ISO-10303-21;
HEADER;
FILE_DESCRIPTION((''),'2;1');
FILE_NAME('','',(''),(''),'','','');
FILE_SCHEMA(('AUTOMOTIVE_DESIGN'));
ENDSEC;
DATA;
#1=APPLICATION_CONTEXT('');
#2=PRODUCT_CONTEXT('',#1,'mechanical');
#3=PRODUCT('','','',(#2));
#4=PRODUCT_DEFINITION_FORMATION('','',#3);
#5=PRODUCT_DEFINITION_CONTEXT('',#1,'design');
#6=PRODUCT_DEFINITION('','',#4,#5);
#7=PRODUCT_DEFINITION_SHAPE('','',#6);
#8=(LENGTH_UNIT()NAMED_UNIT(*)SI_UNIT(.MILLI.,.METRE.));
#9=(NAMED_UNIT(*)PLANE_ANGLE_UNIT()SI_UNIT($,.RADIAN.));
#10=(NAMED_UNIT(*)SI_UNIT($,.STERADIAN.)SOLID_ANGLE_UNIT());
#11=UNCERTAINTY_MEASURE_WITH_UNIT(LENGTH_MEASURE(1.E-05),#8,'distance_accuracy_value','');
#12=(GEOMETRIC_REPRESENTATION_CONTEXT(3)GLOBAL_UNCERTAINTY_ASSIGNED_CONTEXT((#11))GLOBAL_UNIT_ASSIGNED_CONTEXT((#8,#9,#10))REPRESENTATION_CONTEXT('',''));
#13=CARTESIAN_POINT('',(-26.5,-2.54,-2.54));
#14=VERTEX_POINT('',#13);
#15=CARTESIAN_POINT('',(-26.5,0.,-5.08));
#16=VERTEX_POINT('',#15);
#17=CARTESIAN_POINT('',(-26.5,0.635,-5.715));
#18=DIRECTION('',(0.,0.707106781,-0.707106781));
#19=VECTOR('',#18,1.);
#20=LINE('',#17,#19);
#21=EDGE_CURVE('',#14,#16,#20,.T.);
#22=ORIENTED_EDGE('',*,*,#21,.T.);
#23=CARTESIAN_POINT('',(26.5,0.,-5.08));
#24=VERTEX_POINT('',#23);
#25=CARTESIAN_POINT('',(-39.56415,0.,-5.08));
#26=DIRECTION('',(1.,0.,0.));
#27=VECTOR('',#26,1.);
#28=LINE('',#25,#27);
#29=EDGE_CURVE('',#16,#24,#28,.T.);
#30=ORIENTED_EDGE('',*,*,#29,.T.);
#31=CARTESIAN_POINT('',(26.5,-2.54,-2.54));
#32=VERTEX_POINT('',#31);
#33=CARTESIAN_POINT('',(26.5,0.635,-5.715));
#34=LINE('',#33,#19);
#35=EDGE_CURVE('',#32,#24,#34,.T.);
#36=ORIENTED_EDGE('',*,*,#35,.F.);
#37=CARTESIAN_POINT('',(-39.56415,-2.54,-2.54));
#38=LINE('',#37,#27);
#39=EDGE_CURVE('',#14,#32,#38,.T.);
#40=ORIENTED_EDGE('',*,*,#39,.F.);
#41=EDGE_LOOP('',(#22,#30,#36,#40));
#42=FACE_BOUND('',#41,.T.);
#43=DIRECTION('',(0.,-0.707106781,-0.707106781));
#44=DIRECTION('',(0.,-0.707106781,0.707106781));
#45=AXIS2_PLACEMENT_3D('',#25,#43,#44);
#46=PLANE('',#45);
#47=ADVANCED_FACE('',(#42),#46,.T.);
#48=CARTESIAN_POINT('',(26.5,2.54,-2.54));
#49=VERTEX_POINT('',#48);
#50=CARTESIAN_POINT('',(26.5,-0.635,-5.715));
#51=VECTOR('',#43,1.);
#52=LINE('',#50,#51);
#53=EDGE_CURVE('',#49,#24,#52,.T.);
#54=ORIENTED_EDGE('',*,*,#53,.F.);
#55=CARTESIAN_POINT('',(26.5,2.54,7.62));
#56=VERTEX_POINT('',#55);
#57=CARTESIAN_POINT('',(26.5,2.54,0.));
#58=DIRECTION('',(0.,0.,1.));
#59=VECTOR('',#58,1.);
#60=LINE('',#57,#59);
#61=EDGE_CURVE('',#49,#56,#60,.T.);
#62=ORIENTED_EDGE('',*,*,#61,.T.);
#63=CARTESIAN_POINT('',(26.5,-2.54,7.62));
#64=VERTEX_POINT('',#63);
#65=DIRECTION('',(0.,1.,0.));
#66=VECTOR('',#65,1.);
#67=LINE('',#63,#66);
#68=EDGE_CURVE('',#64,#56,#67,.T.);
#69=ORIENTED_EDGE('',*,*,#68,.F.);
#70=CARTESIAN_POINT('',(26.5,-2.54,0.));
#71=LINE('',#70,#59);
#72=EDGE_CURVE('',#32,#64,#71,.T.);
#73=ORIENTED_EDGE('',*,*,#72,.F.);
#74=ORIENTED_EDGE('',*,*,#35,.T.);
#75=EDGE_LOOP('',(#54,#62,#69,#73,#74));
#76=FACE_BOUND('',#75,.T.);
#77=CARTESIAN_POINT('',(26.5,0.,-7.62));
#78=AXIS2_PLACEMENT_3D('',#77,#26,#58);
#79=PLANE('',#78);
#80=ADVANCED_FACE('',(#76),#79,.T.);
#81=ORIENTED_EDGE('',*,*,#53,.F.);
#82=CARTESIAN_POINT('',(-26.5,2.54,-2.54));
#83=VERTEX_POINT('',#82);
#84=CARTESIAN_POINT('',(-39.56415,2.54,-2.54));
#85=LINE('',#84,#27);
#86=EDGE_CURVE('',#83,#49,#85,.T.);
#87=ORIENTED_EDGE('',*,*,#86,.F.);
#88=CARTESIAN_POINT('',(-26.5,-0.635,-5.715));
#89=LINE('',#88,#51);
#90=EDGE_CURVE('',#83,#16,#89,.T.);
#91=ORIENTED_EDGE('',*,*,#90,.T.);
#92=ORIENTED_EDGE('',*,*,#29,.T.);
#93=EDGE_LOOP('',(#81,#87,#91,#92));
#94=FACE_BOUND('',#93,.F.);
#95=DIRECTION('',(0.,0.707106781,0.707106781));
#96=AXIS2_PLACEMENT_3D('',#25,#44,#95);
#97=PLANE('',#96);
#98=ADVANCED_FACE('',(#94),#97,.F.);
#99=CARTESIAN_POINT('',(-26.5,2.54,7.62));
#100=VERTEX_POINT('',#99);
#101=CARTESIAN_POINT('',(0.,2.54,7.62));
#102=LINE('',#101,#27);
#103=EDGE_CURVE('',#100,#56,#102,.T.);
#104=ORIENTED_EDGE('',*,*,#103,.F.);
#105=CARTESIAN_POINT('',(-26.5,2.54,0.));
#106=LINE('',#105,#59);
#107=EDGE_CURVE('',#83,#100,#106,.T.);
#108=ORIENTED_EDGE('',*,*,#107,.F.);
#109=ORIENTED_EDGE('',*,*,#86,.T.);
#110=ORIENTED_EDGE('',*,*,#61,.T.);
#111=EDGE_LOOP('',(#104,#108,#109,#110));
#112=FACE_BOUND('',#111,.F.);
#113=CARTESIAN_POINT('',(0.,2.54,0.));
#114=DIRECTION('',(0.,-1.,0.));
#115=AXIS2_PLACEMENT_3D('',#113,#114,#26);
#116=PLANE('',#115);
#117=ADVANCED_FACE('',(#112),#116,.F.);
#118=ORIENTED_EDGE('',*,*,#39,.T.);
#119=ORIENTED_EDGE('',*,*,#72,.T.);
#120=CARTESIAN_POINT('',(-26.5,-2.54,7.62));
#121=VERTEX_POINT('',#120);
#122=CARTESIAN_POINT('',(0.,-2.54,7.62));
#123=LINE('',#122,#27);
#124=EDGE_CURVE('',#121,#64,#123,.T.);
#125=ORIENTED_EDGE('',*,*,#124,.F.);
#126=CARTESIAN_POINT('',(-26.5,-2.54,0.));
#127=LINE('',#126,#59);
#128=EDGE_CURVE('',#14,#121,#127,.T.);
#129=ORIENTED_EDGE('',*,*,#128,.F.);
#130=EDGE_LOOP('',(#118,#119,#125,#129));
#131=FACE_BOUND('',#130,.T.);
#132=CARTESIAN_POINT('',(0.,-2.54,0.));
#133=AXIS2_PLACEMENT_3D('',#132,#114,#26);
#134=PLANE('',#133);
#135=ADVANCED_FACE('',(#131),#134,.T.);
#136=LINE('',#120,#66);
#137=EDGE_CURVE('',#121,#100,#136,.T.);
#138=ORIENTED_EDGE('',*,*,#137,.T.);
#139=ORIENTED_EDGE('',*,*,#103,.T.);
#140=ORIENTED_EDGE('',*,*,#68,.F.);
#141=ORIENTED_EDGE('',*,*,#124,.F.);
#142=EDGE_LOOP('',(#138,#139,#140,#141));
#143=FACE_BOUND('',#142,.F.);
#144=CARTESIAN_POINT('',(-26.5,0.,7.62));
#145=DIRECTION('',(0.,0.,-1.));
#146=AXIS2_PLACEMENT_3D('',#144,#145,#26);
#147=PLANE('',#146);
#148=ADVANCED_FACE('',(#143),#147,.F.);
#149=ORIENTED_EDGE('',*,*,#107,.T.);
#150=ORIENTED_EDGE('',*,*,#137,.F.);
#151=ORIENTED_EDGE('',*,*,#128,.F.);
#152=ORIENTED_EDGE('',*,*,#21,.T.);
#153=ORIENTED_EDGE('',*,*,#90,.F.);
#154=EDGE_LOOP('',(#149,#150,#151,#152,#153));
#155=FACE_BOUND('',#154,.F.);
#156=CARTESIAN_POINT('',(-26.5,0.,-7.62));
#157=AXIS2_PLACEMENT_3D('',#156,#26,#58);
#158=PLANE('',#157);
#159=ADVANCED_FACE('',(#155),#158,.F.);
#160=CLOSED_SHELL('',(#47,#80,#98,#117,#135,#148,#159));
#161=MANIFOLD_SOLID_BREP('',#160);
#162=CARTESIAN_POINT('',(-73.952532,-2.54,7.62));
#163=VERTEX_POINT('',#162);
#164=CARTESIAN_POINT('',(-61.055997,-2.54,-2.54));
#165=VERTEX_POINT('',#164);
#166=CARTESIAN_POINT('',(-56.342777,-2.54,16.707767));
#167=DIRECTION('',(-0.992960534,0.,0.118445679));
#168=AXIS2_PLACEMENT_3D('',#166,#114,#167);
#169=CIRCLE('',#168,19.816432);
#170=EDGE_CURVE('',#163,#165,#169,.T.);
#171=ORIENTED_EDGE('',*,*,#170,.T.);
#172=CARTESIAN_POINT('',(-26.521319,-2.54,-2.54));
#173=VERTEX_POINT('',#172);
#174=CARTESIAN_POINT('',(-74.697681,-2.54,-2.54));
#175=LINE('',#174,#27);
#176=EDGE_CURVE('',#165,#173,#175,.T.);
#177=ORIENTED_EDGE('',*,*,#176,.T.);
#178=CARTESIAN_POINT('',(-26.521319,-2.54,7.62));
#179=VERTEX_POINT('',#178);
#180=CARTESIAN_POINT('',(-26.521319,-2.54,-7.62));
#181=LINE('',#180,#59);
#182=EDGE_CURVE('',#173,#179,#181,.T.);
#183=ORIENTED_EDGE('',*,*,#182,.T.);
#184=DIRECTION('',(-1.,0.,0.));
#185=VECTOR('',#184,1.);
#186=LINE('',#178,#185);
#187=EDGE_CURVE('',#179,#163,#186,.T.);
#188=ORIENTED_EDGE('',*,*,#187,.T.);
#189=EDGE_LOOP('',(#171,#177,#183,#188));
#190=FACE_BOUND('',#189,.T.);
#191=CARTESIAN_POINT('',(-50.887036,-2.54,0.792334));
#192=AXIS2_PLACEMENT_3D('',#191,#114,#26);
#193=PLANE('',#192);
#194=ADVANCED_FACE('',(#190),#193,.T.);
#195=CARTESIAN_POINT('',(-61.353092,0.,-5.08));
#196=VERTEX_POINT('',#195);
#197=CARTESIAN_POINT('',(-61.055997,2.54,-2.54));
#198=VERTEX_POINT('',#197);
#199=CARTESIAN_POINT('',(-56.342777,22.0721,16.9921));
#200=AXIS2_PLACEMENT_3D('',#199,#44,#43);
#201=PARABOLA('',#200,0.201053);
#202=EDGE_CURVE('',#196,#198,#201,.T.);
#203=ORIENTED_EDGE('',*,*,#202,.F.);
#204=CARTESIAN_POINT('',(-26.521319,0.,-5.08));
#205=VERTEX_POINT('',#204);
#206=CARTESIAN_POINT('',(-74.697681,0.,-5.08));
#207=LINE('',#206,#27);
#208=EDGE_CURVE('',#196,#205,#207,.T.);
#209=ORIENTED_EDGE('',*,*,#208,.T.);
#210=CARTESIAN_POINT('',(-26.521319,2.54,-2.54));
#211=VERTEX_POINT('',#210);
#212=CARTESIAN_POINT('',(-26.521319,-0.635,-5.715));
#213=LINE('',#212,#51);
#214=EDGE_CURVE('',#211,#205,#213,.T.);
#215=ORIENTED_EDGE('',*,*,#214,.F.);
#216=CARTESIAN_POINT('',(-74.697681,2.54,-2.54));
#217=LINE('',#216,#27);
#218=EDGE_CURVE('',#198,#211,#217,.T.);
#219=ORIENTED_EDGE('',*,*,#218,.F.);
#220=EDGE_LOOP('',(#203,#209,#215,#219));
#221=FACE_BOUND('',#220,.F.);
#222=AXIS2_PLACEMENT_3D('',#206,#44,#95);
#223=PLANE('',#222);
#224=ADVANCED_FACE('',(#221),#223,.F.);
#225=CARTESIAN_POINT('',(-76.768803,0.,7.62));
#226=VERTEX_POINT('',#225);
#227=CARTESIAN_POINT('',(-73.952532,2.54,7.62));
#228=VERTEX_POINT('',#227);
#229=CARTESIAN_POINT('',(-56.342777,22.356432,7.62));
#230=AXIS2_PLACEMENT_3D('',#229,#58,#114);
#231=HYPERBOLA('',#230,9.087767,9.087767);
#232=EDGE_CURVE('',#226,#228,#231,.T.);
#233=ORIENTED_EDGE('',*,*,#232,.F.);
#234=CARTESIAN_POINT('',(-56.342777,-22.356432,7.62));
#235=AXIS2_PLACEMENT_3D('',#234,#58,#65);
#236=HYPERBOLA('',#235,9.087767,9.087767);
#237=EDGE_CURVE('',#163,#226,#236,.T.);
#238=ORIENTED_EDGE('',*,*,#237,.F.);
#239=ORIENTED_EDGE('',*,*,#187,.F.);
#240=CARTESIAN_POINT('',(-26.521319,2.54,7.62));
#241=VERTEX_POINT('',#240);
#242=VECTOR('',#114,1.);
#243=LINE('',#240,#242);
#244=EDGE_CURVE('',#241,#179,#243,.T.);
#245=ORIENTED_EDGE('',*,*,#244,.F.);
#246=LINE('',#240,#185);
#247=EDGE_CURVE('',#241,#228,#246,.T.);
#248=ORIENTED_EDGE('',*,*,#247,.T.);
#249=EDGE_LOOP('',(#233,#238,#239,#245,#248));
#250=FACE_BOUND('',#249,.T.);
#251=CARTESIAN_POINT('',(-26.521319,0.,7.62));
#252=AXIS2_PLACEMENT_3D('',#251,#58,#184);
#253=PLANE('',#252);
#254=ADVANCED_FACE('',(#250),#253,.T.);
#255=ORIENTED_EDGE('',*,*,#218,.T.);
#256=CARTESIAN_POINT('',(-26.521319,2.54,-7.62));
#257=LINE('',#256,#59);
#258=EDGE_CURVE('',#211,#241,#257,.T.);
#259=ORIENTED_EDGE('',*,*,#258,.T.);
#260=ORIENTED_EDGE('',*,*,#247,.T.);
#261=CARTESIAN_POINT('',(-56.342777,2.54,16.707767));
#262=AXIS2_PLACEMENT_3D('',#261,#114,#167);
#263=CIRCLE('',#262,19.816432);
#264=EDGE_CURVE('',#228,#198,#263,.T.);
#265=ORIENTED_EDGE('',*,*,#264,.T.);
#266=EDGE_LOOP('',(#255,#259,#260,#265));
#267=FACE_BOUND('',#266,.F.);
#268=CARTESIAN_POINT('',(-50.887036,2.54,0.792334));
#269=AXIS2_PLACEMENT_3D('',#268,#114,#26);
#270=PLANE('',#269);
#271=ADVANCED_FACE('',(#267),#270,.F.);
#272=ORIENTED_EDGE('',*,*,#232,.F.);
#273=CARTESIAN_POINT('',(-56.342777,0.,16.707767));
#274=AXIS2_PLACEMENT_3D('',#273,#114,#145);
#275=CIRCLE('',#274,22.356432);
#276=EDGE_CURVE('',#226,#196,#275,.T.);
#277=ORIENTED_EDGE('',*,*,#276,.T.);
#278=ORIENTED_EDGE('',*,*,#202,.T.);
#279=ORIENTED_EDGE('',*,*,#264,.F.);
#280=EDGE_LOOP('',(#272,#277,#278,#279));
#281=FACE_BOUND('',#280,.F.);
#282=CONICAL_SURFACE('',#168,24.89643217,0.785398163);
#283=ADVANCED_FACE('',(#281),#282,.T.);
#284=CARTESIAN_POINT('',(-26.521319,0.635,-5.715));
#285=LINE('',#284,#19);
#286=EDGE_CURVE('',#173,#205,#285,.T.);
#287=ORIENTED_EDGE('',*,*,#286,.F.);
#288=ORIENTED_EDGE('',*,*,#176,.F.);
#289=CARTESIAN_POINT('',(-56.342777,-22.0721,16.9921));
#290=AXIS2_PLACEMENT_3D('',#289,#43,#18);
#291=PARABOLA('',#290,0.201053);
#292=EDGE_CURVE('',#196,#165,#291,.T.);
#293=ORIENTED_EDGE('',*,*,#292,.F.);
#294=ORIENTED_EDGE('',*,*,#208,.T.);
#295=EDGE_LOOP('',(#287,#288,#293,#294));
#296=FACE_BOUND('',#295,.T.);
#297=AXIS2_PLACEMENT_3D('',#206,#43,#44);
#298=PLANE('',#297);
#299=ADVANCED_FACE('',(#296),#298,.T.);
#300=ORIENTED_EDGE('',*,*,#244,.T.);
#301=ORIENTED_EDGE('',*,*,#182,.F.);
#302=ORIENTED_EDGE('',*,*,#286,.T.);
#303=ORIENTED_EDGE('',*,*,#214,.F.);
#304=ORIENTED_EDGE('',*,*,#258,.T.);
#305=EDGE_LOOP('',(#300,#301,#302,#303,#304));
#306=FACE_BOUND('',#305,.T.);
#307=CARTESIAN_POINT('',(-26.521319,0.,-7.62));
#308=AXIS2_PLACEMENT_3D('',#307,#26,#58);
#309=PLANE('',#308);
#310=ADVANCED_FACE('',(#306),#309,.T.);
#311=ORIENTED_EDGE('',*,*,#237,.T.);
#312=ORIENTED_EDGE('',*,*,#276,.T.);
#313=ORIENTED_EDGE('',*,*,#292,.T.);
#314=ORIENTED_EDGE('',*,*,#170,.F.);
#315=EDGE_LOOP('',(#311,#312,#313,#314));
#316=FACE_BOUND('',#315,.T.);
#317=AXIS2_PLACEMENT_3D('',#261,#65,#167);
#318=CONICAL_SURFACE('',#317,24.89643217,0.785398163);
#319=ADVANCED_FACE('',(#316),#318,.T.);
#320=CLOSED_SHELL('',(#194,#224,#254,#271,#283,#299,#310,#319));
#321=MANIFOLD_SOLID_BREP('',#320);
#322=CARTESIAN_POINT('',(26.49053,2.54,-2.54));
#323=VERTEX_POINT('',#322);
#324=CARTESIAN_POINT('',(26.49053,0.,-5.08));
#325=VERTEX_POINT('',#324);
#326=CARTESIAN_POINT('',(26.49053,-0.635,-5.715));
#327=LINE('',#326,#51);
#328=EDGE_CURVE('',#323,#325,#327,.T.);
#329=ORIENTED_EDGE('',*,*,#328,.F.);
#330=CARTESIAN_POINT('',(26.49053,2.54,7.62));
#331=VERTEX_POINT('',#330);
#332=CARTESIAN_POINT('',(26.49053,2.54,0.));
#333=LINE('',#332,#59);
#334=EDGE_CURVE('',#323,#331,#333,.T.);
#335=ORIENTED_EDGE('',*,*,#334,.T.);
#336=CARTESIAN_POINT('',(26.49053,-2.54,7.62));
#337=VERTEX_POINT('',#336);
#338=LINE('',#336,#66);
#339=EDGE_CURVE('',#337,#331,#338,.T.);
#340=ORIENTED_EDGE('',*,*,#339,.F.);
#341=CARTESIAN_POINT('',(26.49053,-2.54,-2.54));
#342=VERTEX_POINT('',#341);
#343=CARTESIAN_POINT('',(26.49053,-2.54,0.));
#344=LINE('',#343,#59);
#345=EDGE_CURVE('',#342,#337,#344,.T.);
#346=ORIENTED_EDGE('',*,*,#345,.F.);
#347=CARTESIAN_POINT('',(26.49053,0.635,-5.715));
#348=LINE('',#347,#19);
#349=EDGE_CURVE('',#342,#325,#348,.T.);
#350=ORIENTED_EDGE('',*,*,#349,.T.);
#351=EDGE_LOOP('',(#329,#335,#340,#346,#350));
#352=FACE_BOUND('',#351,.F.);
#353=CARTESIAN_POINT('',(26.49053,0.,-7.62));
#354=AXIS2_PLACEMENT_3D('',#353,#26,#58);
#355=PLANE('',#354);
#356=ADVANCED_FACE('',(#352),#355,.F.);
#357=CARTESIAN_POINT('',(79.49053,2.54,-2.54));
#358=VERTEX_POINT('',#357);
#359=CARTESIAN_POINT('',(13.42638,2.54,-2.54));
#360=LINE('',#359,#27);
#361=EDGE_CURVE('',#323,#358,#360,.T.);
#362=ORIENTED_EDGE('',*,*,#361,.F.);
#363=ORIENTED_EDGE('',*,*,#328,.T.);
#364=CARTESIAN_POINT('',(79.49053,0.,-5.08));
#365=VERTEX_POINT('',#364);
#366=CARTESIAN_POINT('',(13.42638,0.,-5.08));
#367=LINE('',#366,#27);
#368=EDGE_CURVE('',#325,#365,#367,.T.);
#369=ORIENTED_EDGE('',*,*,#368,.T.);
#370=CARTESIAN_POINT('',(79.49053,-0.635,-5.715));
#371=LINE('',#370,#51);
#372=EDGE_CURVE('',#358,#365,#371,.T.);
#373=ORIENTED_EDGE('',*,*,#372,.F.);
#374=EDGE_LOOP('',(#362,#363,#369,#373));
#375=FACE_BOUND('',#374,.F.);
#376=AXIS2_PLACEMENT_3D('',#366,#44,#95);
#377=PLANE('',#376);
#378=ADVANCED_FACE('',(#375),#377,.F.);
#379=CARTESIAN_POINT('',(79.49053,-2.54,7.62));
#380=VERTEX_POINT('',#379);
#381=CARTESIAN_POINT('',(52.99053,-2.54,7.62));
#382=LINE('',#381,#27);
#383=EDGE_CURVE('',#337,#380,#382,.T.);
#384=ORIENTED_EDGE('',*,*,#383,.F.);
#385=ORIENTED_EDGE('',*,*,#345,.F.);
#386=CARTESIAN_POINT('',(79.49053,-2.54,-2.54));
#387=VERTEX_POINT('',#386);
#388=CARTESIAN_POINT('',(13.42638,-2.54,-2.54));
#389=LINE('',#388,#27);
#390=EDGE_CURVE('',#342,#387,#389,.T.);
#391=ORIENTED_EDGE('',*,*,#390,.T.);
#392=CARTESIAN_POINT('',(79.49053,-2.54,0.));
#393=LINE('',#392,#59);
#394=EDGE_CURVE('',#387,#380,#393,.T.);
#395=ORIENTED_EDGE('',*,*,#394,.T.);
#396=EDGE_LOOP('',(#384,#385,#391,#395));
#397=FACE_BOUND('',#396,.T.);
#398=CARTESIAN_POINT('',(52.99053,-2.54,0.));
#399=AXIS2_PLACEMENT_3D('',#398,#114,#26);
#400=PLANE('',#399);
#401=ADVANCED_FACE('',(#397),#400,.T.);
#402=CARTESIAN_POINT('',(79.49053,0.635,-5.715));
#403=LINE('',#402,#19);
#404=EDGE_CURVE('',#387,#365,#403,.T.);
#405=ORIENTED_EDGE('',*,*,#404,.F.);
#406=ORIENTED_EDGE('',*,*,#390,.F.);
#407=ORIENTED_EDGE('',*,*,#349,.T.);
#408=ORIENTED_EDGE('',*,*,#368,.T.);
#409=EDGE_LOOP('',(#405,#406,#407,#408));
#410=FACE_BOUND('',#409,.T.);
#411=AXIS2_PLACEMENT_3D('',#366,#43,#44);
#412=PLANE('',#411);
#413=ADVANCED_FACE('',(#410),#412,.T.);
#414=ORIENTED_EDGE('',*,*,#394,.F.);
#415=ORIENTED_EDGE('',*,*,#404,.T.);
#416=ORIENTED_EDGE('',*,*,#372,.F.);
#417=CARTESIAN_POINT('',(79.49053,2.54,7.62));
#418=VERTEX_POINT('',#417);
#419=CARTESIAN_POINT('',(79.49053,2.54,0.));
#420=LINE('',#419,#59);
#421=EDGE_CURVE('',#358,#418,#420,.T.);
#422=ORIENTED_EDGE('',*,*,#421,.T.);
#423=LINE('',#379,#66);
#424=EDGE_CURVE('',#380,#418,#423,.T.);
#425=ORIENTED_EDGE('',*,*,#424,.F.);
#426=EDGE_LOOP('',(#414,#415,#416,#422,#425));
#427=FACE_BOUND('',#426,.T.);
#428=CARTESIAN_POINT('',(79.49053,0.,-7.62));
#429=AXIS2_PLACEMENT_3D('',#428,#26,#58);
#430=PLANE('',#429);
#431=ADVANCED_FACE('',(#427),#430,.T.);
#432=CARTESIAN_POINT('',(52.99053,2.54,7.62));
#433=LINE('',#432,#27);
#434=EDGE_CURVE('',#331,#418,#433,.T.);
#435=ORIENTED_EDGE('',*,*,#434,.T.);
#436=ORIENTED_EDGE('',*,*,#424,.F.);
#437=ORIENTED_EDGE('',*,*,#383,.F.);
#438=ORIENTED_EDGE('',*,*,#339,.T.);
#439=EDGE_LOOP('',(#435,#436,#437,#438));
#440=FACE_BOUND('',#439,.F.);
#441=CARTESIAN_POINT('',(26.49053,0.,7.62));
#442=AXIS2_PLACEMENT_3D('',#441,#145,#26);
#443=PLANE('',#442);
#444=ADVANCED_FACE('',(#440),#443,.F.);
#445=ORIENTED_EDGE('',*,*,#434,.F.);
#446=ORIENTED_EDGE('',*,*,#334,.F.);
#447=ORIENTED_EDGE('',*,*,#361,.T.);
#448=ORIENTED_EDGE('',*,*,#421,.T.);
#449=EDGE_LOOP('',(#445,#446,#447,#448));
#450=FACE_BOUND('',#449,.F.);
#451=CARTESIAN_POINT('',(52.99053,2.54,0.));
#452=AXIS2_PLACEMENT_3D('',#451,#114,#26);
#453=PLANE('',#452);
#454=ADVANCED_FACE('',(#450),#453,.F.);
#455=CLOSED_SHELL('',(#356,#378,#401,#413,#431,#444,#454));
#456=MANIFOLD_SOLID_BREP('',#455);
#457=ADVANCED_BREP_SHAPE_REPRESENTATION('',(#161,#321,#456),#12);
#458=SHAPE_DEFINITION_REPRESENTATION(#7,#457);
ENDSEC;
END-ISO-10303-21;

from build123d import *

# Parameters (mm, degrees)
F0_W          = 53
F0_H          = 15.24
F1_DEPTH      = 2.54
F1_DEPTH_BACK = 2.54
F3_DEPTH      = 2.54
F3_DEPTH_BACK = 2.54
F4_W          = 53
F4_H          = 15.24
F5_DEPTH      = 2.54
F5_DEPTH_BACK = 2.54
F6_T1_DEPTH   = 61.2405111475
F6_2_T1_DEPTH = 79.1282991577
F6_3_T1_DEPTH = 79.1282991577
F7_T2_ANGLE   = 87.5032062874
F7_T4_ANGLE   = 87.5032062874


# Not quite as in the source:
# - a fillet or chamfer that OpenCascade refuses, or shapes differently, is made with other operations: its cross-section is extruded or revolved along the edge and cut away or added


with BuildPart() as f1:
    # F0 (on Front) → F1 (new body, two sides)
    with BuildSketch(Plane.XZ) as f1_sk:
        Rectangle(F0_W, F0_H)
    extrude(amount=F1_DEPTH)
    extrude(f1_sk.sketch, amount=-F1_DEPTH_BACK)

    # F6#2: chamfer of 5.08 on 2 edges, made by hand

    # F6_2_s2 → F6_2_t1 (cut)
    with BuildSketch(Plane.YZ.offset(-39.5641495789)):
        Polygon((2.54, -7.62), (-2.54, -2.54), (-2.54, -7.62), align=None)
        Polygon((-2.54, -7.62), (2.54, -2.54), (2.54, -7.62), align=None)
    extrude(amount=F6_2_T1_DEPTH, mode=Mode.SUBTRACT)


with BuildPart() as f3:
    # F2 (on Front) → F3 (new body, two sides)
    with BuildSketch(Plane.XZ) as f3_sk:
        with BuildLine():
            Line((-61.6335310042, -7.62), (-26.5213190144, -7.62))
            Line((-26.5213190144, -7.62), (-26.5213190144, 7.62))
            Line((-26.5213190144, 7.62), (-79.2149826884, 7.62))
            Line((-79.2149826884, 7.62), (-79.2149826884, 6.8744295258))
            ThreePointArc((-79.2149826884, 6.8744295258), (-72.179765207, -2.5021815938), (-61.6335310042, -7.62))
        make_face()
    extrude(amount=F3_DEPTH)
    extrude(f3_sk.sketch, amount=-F3_DEPTH_BACK)

    # F6: chamfer of 5.08 on 2 edges, made by hand

    # F6_s2 → F6_t1 (cut)
    with BuildSketch(Plane.YZ.offset(-74.6976805831)):
        Polygon((2.54, -7.62), (-2.54, -2.54), (-2.54, -7.62), align=None)
        Polygon((-2.54, -7.62), (2.54, -2.54), (2.54, -7.62), align=None)
    extrude(amount=F6_T1_DEPTH, mode=Mode.SUBTRACT)

    # F7: chamfer of 5.08 on 2 edges, made by hand

    # F7_s1 → F7_t2 (revolve, cut)
    with BuildSketch(Plane(origin=(1.1745778192, 0, 9.8467873874), x_dir=(0, 1, 0), z_dir=(0.118445679, 0, 0.9929605335))):
        Polygon((2.54, 82.8215486164), (-2.54, 77.7415486164), (-2.54, 82.8215486164), align=None)
    revolve(axis=Axis((-56.3427767118, -2.54, 16.7077671356), (0, -1, 0)), revolution_arc=F7_T2_ANGLE, mode=Mode.SUBTRACT)

    # F7_s3 → F7_t4 (revolve, cut)
    with BuildSketch(Plane(origin=(1.1745778192, 0, 9.8467873874), x_dir=(0, 1, 0), z_dir=(0.118445679, 0, 0.9929605335))):
        Polygon((-2.54, 82.8215486164), (2.54, 77.7415486164), (2.54, 82.8215486164), align=None)
    revolve(axis=Axis((-56.3427767118, 2.54, 16.7077671356), (0, -1, 0)), revolution_arc=F7_T4_ANGLE, mode=Mode.SUBTRACT)


with BuildPart() as f5:
    # F4 (on Front) → F5 (new body, two sides)
    with BuildSketch(Plane.XZ) as f5_sk:
        with Locations((52.9905296862, 0)):
            Rectangle(F4_W, F4_H)
    extrude(amount=F5_DEPTH)
    extrude(f5_sk.sketch, amount=-F5_DEPTH_BACK)

    # F6#3: chamfer of 5.08 on 2 edges, made by hand

    # F6_3_s2 → F6_3_t1 (cut)
    with BuildSketch(Plane.YZ.offset(13.4263801073)):
        Polygon((-2.54, -7.62), (2.54, -2.54), (2.54, -7.62), align=None)
        Polygon((2.54, -7.62), (-2.54, -2.54), (-2.54, -7.62), align=None)
    extrude(amount=F6_3_T1_DEPTH, mode=Mode.SUBTRACT)


solid = Compound([f1.part, f3.part, f5.part])
